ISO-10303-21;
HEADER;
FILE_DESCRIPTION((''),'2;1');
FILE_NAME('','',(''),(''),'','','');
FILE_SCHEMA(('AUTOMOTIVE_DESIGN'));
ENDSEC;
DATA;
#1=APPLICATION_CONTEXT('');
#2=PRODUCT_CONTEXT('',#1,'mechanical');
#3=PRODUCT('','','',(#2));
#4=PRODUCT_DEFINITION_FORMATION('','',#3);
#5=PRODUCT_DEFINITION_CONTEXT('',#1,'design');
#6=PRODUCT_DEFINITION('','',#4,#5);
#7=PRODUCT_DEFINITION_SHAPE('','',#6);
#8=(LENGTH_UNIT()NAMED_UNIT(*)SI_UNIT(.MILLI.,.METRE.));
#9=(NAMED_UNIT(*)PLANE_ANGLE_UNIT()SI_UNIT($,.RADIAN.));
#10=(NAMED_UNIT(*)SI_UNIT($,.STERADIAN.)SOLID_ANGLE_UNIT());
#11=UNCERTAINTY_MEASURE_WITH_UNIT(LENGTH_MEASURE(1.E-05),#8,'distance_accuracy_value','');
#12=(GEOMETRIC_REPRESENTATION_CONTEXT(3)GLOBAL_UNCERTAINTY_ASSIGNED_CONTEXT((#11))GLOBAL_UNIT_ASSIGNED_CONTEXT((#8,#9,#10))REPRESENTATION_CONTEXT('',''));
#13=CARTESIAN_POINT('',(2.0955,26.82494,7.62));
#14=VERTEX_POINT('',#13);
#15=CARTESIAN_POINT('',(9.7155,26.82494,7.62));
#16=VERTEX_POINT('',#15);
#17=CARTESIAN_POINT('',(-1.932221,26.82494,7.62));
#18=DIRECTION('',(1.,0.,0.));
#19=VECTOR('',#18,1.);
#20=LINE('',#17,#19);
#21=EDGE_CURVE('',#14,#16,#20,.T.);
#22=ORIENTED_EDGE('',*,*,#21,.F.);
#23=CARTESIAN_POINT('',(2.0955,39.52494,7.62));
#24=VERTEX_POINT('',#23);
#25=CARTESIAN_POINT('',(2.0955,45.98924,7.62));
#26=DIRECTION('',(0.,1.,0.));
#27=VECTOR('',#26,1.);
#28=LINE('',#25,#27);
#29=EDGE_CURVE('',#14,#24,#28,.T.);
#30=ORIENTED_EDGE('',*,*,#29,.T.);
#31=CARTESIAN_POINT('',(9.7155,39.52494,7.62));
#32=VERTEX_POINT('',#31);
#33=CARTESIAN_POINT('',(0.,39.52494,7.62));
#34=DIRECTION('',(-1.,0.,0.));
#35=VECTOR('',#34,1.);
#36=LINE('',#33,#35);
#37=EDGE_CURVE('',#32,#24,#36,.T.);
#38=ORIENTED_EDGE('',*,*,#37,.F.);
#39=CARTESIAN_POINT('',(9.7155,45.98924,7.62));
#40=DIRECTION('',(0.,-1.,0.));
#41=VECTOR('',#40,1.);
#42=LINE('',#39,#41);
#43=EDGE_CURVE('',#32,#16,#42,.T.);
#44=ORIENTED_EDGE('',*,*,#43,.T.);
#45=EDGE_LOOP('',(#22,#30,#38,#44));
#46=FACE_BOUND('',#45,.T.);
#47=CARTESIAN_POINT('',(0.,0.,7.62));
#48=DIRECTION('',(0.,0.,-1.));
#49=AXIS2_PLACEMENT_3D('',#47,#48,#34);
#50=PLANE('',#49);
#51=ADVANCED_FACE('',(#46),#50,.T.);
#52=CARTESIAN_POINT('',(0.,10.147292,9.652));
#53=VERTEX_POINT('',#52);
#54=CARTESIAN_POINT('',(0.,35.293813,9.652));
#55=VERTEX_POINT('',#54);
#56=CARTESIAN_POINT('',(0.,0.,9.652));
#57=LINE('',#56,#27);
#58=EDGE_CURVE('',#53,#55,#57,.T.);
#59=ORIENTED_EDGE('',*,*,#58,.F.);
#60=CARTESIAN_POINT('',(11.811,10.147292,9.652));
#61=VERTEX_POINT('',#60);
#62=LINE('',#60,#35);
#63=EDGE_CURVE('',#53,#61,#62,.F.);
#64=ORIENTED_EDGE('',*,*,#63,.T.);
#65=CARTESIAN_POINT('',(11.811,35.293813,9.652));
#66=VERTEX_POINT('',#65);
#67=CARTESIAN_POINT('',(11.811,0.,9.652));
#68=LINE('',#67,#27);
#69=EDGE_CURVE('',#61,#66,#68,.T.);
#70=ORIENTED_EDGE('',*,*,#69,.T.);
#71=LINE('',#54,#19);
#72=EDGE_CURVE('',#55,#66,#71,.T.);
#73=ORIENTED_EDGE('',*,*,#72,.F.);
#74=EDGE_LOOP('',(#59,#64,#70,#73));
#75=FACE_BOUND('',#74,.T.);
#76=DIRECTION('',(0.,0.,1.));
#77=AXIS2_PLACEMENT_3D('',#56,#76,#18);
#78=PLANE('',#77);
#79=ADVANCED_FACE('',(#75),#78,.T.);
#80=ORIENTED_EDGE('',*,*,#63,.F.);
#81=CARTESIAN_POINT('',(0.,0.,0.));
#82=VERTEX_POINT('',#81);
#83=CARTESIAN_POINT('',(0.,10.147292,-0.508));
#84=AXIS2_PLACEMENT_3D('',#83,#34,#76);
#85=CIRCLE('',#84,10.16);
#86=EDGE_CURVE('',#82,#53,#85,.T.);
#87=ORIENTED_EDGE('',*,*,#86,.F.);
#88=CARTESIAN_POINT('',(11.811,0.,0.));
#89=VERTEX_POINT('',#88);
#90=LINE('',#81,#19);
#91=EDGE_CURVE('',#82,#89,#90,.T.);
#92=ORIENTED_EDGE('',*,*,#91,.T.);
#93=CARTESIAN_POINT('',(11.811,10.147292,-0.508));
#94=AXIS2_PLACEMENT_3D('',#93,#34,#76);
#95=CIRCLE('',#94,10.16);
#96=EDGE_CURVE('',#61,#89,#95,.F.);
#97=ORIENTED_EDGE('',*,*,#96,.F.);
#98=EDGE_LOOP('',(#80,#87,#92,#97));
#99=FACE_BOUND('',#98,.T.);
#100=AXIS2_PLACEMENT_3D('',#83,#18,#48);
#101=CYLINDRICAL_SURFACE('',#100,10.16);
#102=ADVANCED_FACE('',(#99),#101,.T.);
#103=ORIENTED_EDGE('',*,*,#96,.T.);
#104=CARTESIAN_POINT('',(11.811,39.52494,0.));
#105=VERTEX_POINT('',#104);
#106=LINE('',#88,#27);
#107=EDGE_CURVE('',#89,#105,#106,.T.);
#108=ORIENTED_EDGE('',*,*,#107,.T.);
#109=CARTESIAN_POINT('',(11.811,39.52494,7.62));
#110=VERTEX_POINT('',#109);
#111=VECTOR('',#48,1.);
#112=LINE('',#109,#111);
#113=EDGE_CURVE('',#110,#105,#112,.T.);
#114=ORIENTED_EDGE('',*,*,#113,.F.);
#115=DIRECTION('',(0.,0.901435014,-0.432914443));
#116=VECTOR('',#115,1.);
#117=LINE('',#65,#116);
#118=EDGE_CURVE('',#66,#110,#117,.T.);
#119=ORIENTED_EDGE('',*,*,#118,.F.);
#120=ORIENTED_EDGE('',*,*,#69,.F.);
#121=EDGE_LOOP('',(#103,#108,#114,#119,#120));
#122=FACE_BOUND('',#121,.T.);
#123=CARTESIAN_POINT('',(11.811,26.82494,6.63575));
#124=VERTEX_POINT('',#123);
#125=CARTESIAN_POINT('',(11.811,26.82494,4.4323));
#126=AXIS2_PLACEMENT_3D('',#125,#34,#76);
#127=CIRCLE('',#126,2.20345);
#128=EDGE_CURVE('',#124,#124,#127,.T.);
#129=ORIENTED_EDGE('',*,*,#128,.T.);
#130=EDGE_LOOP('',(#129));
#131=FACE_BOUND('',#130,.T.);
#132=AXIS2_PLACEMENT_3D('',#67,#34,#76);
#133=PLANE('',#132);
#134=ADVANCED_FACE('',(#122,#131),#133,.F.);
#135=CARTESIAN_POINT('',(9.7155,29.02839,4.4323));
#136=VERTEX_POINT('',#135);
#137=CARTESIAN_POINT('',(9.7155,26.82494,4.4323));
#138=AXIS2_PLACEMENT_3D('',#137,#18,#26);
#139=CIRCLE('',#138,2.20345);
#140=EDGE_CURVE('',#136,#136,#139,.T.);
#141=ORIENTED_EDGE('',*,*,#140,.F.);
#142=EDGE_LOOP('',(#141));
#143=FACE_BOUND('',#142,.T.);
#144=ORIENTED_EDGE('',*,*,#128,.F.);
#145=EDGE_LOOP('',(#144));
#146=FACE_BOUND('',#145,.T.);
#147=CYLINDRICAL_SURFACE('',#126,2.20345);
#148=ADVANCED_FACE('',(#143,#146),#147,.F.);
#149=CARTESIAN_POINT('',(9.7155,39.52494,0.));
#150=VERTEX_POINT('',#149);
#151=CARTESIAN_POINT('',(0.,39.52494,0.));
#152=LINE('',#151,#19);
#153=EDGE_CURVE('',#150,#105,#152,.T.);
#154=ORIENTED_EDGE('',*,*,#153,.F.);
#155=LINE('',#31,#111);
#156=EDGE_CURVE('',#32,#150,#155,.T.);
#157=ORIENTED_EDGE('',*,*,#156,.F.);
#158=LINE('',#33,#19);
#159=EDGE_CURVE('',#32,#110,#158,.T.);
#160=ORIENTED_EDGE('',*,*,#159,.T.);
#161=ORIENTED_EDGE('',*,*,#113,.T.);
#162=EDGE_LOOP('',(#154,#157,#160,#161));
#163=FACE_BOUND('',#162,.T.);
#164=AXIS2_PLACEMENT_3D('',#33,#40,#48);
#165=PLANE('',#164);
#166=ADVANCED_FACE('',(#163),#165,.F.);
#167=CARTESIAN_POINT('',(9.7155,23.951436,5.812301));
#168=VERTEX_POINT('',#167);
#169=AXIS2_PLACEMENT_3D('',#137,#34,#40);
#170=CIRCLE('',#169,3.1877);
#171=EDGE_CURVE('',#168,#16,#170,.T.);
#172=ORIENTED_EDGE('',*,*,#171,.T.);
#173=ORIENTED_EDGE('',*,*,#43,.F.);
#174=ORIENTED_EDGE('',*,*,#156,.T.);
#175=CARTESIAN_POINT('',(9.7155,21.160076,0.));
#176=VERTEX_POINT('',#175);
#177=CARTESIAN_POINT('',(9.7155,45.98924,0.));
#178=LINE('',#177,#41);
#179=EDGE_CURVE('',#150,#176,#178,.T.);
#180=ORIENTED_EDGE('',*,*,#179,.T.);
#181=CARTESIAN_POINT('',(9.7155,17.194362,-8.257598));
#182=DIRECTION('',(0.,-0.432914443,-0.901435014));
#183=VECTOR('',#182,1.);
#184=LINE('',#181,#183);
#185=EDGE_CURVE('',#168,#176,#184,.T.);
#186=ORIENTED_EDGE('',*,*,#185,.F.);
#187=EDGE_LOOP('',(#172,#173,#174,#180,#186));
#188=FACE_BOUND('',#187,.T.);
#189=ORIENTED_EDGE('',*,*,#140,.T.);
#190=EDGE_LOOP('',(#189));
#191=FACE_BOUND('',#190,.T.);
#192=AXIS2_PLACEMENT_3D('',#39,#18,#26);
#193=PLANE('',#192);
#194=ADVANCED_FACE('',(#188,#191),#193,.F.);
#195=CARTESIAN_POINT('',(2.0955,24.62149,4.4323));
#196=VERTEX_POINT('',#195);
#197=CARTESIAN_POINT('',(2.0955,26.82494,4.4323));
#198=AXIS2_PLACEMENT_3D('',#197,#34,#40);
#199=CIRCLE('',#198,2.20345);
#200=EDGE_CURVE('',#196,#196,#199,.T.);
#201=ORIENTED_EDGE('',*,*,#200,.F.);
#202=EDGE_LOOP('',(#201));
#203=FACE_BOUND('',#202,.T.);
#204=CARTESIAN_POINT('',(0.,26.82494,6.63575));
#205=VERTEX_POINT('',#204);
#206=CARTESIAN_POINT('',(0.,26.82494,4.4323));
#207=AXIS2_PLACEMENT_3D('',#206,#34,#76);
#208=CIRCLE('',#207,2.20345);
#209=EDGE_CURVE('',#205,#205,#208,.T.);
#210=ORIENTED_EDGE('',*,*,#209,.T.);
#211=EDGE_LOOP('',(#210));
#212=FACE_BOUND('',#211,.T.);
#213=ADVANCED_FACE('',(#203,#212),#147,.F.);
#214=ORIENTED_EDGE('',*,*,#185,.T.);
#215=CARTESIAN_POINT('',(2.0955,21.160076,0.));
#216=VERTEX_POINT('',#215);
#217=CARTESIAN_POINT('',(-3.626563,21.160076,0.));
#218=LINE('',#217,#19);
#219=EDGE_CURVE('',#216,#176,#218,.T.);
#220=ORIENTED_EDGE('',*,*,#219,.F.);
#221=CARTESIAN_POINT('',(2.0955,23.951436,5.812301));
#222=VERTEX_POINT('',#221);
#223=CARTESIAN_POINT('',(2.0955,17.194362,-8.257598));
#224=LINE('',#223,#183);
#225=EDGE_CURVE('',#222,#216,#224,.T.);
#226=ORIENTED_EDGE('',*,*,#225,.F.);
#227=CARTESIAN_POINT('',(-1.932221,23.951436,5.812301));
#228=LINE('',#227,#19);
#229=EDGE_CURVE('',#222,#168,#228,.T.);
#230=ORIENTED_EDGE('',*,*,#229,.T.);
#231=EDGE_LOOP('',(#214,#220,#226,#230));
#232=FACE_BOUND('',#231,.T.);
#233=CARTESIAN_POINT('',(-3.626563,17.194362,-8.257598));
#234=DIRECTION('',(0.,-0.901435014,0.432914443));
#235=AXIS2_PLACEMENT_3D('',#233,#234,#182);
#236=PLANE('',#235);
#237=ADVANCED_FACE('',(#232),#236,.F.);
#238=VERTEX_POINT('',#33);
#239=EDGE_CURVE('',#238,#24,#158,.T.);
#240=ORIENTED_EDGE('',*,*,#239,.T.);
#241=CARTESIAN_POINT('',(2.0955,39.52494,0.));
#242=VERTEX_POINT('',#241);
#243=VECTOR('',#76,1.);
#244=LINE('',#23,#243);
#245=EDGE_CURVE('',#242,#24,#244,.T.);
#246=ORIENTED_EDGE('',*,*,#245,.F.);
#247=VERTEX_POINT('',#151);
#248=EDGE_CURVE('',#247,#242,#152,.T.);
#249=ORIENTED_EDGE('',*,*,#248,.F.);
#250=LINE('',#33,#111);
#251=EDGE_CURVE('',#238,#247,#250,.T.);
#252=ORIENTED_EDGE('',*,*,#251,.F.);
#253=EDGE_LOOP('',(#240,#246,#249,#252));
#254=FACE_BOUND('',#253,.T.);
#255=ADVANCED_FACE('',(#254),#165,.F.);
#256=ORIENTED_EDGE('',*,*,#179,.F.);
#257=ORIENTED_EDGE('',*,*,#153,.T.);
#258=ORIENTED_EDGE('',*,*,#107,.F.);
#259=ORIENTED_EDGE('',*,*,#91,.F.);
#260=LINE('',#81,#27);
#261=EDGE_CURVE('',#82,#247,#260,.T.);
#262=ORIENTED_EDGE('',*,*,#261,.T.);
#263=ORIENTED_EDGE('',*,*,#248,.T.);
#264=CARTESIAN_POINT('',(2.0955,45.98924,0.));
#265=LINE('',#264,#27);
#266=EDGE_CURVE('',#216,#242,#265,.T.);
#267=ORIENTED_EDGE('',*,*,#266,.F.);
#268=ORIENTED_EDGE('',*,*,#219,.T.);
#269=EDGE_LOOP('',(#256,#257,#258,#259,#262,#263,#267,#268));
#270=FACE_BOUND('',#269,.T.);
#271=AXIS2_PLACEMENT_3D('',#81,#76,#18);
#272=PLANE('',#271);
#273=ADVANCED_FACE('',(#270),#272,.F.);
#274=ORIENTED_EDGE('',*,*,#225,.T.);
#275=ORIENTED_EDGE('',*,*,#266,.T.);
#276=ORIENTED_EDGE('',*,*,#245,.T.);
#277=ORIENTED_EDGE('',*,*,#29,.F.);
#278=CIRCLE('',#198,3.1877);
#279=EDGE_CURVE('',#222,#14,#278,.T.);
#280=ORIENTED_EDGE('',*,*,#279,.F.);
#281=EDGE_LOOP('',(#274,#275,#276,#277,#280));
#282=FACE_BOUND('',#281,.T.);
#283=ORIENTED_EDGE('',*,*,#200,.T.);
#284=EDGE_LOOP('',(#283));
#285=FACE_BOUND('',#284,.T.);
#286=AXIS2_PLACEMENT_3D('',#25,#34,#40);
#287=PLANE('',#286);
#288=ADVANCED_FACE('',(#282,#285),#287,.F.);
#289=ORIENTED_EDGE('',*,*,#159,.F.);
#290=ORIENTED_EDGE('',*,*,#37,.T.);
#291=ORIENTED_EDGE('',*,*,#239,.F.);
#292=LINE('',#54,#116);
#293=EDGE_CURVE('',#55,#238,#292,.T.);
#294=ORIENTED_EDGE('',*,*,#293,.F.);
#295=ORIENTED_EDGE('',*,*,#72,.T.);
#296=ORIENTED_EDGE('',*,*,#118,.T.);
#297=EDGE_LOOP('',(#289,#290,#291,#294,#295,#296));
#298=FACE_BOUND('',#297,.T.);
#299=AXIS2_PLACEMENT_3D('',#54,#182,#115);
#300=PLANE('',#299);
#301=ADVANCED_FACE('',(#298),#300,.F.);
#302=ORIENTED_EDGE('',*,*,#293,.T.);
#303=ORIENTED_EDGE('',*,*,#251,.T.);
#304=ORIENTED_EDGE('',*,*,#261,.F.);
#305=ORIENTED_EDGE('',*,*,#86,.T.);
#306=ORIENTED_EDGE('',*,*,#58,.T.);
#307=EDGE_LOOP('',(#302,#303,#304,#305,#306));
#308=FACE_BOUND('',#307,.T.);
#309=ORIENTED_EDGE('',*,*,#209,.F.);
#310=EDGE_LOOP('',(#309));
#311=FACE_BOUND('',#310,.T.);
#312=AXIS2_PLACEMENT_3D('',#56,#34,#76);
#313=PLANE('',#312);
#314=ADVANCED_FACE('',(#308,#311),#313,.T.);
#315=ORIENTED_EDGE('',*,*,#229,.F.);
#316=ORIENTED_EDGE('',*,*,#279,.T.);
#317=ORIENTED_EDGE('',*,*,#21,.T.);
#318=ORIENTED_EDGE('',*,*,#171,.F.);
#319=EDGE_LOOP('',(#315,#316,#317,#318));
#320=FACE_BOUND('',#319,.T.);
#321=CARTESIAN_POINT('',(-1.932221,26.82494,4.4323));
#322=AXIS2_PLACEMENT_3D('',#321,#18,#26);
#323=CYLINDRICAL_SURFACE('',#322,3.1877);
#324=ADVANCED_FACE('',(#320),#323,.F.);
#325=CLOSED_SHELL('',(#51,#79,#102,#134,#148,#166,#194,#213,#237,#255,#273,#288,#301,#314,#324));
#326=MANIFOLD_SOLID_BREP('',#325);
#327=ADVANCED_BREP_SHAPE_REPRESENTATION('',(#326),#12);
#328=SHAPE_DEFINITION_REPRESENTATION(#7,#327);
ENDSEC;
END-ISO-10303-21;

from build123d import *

# Parameters (mm, degrees)
SKETCH1_W               = 11.811
SKETCH1_H               = 45.98924
BOSS_EXTRUDE1_DEPTH     = 9.652
FILLET5_R               = 4.826
SKETCH2_W               = 7.62
SKETCH2_H               = 22.352
CUT_EXTRUDE1_DEPTH      = 7.62
CUT_EXTRUDE2_DEPTH      = 49.452771033
CUT_EXTRUDE2_DEPTH_BACK = 49.452771033
SKETCH3_R               = 2.20345
FILLET4_R               = 4.826
FILLET6_R               = 10.16
CUT_EXTRUDE3_DEPTH      = 49.452771033
CUT_EXTRUDE4_DEPTH      = 7.62
BOSS_EXTRUDE2_DEPTH     = 7.62


with BuildPart() as part:
    # Sketch1 → Boss-Extrude1 (new body)
    with BuildSketch(Plane.XY):
        with Locations((5.9055, 22.99462)):
            Rectangle(SKETCH1_W, SKETCH1_H)
    extrude(amount=BOSS_EXTRUDE1_DEPTH)

    # Fillet5
    fillet5_edges = [part.edges().sort_by_distance(p)[0] for p in [
        (5.9055, 45.98924, 0),
    ]]
    fillet(fillet5_edges, radius=FILLET5_R)

    # Sketch2 → Cut-Extrude1 (cut)
    with BuildSketch(Plane(origin=(0, 0, 0), x_dir=(-1, 0, 0), z_dir=(0, 0, -1))):
        with Locations((-5.9055, 34.81324)):
            Rectangle(SKETCH2_W, SKETCH2_H)
    extrude(amount=-CUT_EXTRUDE1_DEPTH, mode=Mode.SUBTRACT)

    # Sketch3 → Cut-Extrude2 (cut, two sides: drawn at the far end of the back side and taken through both)
    with BuildSketch(Plane.ZY.offset(-CUT_EXTRUDE2_DEPTH_BACK)):
        with Locations((4.4323, 26.82494)):
            Circle(SKETCH3_R)
    extrude(amount=CUT_EXTRUDE2_DEPTH + CUT_EXTRUDE2_DEPTH_BACK, mode=Mode.SUBTRACT)

    # Fillet4
    # the kernel refuses this fillet: 4.826 mm, written as the material it takes off along each edge
    with BuildSketch(Plane(origin=(23.876, 45.98924, 9.652), x_dir=(0, 0, -1), z_dir=(-1, 0, 0))) as fillet4_piece_1:
        with BuildLine():
            CenterArc((FILLET4_R, FILLET4_R), FILLET4_R, 180, 90)
            Line((0, FILLET4_R), (0, 0))
            Line((0, 0), (FILLET4_R, 0))
        make_face()
    extrude(amount=35.941, mode=Mode.SUBTRACT)

    # Fillet6
    # the kernel refuses this fillet: 10.16 mm, written as the material it takes off along each edge
    with BuildSketch(Plane(origin=(-25.368230131, 0, 9.652), x_dir=(0, 1, 0), z_dir=(1, 0, 0))) as fillet6_piece_1:
        with BuildLine():
            CenterArc((10.147292053, -10.16), FILLET6_R, 90, 87.134016017)
            Line((0, -9.652), (-0.202945841, -9.64184))
            ThreePointArc((-0.202945841, -9.64184), (-0.2032, -4.826), (-0.2032, 0))
            Line((-0.2032, 0), (0, 0.2032))
            Line((0, 0.2032), (10.147292053, 0.2032))
            Line((10.147292053, 0.2032), (10.147292053, 0))
        make_face()
    extrude(amount=62.547460263, mode=Mode.SUBTRACT)

    # Sketch4 → Cut-Extrude3 (cut, through all)
    with BuildSketch(Plane(origin=(11.811, 0, 0), x_dir=(0, 0, -1), z_dir=(1, 0, 0))):
        Polygon((-9.652, 35.293813088), (-7.62, 39.52494), (0, 39.52494), (0, 45.98924), (-9.652, 45.98924), align=None)
    extrude(amount=-CUT_EXTRUDE3_DEPTH, mode=Mode.SUBTRACT)

    # Sketch5 → Cut-Extrude4 (cut)
    with BuildSketch(Plane.ZY.offset(-9.7155)):
        Polygon((0, 21.160076085), (5.158068358, 23.63724), (0, 23.63724), align=None)
    extrude(amount=CUT_EXTRUDE4_DEPTH, mode=Mode.SUBTRACT)

    # Sketch5<3> → Boss-Extrude2 (add)
    with BuildSketch(Plane.ZY.offset(-9.7155)):
        with BuildLine():
            Line((5.812301369, 23.951435604), (5.158068358, 23.63724))
            Line((5.158068358, 23.63724), (7.62, 23.63724))
            Line((7.62, 23.63724), (7.62, 26.82494))
            ThreePointArc((7.62, 26.82494), (7.130490287, 25.127530072), (5.812301369, 23.951435604))
        make_face()
    extrude(amount=BOSS_EXTRUDE2_DEPTH)


solid = part.part
